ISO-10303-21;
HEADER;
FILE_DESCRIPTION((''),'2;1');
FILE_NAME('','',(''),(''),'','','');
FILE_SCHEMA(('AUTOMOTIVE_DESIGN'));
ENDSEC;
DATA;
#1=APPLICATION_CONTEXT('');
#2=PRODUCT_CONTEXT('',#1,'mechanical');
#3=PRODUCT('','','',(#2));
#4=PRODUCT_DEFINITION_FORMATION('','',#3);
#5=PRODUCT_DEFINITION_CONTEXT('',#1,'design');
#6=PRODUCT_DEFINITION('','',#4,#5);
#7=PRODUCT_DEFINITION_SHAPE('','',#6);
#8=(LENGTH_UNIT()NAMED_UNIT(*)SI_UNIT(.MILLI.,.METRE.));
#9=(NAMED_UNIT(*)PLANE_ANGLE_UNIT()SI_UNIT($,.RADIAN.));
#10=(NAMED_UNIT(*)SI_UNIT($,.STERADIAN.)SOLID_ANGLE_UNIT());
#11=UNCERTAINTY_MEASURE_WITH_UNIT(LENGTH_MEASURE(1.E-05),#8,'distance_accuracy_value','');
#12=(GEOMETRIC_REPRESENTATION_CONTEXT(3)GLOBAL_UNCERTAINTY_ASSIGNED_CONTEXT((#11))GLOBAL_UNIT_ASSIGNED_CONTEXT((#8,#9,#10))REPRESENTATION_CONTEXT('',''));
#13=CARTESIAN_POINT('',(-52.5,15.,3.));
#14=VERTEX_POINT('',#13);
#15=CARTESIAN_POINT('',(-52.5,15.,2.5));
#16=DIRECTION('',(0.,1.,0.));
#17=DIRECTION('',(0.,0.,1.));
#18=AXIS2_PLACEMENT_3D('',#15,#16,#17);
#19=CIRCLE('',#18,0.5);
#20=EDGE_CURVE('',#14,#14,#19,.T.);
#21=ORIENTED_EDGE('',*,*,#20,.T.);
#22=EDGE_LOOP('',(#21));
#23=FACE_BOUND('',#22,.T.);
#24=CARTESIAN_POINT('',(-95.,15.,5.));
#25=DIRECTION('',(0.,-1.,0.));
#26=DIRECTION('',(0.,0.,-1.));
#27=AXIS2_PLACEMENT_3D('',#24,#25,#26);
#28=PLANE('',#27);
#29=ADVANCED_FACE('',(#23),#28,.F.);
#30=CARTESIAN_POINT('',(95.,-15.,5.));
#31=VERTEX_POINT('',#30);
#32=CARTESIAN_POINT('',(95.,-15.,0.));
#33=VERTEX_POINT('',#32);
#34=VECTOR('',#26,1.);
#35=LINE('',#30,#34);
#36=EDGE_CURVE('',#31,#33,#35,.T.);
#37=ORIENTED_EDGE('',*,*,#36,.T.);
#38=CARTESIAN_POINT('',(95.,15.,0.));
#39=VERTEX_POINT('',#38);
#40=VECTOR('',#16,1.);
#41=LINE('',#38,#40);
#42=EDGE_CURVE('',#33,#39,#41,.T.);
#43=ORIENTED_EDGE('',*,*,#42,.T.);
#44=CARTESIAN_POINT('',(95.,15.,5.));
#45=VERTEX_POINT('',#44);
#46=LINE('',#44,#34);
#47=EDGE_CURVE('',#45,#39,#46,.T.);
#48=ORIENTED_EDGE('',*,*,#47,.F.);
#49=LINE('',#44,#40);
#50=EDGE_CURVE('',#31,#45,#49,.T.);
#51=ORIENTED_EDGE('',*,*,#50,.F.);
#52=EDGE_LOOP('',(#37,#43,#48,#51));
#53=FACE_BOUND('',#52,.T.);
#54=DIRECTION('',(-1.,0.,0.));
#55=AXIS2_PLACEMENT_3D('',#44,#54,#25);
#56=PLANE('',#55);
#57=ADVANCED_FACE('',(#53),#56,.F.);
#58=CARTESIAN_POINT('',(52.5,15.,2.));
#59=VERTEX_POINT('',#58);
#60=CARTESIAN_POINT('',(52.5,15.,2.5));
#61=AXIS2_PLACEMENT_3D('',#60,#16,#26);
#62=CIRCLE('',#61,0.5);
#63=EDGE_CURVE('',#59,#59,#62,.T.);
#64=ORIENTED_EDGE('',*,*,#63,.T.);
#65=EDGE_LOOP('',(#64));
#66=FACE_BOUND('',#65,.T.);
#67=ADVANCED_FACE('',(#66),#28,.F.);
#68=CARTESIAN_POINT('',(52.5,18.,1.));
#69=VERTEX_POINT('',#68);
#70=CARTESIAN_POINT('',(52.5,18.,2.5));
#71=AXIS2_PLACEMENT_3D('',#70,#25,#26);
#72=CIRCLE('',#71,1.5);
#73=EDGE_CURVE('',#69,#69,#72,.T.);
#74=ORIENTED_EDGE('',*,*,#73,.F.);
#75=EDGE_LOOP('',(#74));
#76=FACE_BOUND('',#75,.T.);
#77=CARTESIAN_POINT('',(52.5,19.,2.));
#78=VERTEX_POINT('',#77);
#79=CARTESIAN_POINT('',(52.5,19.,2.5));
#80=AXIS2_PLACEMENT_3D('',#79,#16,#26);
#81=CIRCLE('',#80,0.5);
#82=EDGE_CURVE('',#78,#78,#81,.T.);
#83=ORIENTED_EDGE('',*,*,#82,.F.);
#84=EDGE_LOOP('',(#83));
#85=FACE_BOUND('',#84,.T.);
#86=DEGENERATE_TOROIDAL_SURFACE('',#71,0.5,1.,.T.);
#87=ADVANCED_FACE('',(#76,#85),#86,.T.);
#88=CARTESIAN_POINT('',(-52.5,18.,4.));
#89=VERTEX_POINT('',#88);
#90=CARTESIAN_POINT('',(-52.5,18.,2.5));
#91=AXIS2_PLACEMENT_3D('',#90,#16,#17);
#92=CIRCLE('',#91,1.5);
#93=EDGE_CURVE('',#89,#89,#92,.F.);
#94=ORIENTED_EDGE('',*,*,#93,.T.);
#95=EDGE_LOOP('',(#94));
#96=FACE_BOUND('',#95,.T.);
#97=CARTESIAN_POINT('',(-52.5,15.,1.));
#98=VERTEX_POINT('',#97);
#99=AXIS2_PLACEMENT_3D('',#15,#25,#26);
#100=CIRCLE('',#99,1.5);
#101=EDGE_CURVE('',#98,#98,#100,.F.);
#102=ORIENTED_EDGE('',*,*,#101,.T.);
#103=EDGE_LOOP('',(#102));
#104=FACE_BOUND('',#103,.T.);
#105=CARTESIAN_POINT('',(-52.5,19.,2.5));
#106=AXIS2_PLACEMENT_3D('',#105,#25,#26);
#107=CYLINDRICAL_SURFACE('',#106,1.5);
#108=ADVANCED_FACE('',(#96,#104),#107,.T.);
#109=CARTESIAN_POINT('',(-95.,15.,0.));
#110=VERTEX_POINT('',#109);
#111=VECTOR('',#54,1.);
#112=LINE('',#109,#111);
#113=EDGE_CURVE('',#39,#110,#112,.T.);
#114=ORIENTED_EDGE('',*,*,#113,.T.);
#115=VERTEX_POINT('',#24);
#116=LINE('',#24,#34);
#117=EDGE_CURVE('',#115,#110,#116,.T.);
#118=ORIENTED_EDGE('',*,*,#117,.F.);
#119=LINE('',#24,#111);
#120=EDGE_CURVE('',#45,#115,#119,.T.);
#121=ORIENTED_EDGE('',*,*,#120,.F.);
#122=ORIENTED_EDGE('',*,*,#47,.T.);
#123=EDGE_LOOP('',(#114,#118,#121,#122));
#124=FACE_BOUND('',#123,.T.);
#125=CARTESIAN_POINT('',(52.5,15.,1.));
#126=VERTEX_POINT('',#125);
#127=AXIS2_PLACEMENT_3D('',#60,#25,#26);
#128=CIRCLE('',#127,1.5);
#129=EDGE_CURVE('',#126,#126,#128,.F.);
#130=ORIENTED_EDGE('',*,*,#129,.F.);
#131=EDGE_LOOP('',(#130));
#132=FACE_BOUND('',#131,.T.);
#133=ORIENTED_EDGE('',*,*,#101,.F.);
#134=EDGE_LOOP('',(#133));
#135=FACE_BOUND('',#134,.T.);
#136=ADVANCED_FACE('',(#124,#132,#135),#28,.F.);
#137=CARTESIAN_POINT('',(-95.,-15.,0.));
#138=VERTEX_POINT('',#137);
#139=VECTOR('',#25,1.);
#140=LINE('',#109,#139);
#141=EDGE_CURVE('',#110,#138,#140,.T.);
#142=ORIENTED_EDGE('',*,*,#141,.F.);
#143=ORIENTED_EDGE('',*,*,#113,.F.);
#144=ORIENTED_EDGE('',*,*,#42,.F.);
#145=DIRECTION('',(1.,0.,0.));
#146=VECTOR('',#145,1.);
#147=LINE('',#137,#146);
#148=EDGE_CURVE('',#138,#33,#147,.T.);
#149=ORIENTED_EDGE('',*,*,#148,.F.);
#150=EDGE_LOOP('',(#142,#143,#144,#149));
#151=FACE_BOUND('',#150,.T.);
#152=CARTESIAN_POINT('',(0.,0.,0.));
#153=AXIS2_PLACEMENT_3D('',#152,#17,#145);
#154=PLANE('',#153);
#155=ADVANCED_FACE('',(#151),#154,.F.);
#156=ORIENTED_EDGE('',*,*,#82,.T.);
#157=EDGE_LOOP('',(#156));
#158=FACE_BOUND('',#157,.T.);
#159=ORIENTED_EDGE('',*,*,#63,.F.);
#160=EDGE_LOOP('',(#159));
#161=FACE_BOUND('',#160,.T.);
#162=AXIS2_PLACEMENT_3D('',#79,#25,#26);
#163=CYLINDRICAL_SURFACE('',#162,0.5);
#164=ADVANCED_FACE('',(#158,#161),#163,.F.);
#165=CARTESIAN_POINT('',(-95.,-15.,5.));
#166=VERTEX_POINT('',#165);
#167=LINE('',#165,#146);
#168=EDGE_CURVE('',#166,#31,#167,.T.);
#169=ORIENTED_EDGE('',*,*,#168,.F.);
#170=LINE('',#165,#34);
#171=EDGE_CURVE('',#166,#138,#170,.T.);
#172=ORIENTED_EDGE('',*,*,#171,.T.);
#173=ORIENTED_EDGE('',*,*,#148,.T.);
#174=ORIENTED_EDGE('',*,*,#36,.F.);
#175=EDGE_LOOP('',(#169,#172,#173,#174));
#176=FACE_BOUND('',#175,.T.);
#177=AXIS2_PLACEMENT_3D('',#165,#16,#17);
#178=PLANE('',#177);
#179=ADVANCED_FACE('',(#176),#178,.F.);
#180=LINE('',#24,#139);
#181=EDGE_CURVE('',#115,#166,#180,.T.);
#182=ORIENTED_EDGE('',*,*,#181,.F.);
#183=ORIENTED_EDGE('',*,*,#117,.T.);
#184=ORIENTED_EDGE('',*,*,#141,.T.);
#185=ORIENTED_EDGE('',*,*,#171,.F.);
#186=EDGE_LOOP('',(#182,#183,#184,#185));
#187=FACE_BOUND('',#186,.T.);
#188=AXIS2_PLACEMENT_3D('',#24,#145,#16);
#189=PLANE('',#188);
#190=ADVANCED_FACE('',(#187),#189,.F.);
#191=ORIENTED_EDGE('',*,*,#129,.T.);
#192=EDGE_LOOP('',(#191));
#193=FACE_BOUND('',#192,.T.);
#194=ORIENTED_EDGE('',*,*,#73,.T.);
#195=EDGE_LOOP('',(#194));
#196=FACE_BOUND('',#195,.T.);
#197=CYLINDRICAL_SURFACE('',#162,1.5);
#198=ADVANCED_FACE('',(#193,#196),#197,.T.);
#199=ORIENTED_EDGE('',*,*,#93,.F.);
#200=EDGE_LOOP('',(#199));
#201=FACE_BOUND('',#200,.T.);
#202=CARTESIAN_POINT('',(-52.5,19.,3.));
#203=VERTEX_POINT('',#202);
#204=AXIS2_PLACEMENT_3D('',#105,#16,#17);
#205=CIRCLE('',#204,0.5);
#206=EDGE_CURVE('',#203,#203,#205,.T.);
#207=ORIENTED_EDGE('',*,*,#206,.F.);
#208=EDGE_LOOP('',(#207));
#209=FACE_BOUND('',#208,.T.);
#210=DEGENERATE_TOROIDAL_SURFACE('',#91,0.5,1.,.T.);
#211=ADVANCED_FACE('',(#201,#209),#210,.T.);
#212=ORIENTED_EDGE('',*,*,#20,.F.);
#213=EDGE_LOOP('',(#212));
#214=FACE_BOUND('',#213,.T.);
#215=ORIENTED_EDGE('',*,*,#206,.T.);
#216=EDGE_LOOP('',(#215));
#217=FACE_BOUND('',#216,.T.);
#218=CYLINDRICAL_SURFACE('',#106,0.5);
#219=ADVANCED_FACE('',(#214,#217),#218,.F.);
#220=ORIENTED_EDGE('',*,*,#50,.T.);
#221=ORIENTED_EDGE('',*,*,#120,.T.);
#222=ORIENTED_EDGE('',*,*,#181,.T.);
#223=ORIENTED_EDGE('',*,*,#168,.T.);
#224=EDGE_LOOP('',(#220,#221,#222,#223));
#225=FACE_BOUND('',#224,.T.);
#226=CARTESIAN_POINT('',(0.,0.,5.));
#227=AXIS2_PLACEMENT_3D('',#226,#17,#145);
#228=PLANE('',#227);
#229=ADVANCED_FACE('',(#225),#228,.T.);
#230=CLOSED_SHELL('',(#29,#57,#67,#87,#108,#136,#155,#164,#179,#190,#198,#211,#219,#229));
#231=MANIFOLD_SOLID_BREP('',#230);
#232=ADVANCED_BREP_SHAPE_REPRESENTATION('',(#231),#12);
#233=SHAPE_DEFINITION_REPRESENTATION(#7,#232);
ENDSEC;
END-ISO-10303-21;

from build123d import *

# Parameters (mm, degrees)
ESQUISSE1_W        = 190
ESQUISSE1_H        = 30
BOSS_EXTRU_1_DEPTH = 5
ESQUISSE2_R        = 1.5
ESQUISSE2_R_2      = 0.5
BOSS_EXTRU_2_DEPTH = 4
CONG_1_R           = 1


with BuildPart() as part:
    # Esquisse1 → Boss.-Extru.1 (new body)
    with BuildSketch(Plane.XY):
        Rectangle(ESQUISSE1_W, ESQUISSE1_H)
    extrude(amount=BOSS_EXTRU_1_DEPTH)

    # Esquisse2 → Boss.-Extru.2 (add)
    # profile 1 of 2: a face of its own
    with BuildSketch(Plane(origin=(0, 15, 0), x_dir=(1, 0, 0), z_dir=(0, 1, 0))):
        with Locations(Location((-52.5, -2.5, 0), (0, 0, 90))):
            Circle(ESQUISSE2_R)
        with Locations(Location((-52.5, -2.5, 0), (0, 0, 270))):
            Circle(ESQUISSE2_R_2, mode=Mode.SUBTRACT)
    # profile 2 of 2: a face of its own
    with BuildSketch(Plane(origin=(0, 15, 0), x_dir=(1, 0, 0), z_dir=(0, 1, 0))):
        with Locations(Location((52.5, -2.5, 0), (0, 0, 90))):
            Circle(ESQUISSE2_R)
        with Locations(Location((52.5, -2.5, 0), (0, 0, 90))):
            Circle(ESQUISSE2_R_2, mode=Mode.SUBTRACT)
    extrude(amount=BOSS_EXTRU_2_DEPTH)

    # Congé1
    cong_1_edges = [part.edges().sort_by_distance(p)[0] for p in [
        (-52.5, 19, 4),
        (52.5, 19, 4),
    ]]
    fillet(cong_1_edges, radius=CONG_1_R - 0.0001)  # a hair under: the kernel refuses the full size


solid = part.part
